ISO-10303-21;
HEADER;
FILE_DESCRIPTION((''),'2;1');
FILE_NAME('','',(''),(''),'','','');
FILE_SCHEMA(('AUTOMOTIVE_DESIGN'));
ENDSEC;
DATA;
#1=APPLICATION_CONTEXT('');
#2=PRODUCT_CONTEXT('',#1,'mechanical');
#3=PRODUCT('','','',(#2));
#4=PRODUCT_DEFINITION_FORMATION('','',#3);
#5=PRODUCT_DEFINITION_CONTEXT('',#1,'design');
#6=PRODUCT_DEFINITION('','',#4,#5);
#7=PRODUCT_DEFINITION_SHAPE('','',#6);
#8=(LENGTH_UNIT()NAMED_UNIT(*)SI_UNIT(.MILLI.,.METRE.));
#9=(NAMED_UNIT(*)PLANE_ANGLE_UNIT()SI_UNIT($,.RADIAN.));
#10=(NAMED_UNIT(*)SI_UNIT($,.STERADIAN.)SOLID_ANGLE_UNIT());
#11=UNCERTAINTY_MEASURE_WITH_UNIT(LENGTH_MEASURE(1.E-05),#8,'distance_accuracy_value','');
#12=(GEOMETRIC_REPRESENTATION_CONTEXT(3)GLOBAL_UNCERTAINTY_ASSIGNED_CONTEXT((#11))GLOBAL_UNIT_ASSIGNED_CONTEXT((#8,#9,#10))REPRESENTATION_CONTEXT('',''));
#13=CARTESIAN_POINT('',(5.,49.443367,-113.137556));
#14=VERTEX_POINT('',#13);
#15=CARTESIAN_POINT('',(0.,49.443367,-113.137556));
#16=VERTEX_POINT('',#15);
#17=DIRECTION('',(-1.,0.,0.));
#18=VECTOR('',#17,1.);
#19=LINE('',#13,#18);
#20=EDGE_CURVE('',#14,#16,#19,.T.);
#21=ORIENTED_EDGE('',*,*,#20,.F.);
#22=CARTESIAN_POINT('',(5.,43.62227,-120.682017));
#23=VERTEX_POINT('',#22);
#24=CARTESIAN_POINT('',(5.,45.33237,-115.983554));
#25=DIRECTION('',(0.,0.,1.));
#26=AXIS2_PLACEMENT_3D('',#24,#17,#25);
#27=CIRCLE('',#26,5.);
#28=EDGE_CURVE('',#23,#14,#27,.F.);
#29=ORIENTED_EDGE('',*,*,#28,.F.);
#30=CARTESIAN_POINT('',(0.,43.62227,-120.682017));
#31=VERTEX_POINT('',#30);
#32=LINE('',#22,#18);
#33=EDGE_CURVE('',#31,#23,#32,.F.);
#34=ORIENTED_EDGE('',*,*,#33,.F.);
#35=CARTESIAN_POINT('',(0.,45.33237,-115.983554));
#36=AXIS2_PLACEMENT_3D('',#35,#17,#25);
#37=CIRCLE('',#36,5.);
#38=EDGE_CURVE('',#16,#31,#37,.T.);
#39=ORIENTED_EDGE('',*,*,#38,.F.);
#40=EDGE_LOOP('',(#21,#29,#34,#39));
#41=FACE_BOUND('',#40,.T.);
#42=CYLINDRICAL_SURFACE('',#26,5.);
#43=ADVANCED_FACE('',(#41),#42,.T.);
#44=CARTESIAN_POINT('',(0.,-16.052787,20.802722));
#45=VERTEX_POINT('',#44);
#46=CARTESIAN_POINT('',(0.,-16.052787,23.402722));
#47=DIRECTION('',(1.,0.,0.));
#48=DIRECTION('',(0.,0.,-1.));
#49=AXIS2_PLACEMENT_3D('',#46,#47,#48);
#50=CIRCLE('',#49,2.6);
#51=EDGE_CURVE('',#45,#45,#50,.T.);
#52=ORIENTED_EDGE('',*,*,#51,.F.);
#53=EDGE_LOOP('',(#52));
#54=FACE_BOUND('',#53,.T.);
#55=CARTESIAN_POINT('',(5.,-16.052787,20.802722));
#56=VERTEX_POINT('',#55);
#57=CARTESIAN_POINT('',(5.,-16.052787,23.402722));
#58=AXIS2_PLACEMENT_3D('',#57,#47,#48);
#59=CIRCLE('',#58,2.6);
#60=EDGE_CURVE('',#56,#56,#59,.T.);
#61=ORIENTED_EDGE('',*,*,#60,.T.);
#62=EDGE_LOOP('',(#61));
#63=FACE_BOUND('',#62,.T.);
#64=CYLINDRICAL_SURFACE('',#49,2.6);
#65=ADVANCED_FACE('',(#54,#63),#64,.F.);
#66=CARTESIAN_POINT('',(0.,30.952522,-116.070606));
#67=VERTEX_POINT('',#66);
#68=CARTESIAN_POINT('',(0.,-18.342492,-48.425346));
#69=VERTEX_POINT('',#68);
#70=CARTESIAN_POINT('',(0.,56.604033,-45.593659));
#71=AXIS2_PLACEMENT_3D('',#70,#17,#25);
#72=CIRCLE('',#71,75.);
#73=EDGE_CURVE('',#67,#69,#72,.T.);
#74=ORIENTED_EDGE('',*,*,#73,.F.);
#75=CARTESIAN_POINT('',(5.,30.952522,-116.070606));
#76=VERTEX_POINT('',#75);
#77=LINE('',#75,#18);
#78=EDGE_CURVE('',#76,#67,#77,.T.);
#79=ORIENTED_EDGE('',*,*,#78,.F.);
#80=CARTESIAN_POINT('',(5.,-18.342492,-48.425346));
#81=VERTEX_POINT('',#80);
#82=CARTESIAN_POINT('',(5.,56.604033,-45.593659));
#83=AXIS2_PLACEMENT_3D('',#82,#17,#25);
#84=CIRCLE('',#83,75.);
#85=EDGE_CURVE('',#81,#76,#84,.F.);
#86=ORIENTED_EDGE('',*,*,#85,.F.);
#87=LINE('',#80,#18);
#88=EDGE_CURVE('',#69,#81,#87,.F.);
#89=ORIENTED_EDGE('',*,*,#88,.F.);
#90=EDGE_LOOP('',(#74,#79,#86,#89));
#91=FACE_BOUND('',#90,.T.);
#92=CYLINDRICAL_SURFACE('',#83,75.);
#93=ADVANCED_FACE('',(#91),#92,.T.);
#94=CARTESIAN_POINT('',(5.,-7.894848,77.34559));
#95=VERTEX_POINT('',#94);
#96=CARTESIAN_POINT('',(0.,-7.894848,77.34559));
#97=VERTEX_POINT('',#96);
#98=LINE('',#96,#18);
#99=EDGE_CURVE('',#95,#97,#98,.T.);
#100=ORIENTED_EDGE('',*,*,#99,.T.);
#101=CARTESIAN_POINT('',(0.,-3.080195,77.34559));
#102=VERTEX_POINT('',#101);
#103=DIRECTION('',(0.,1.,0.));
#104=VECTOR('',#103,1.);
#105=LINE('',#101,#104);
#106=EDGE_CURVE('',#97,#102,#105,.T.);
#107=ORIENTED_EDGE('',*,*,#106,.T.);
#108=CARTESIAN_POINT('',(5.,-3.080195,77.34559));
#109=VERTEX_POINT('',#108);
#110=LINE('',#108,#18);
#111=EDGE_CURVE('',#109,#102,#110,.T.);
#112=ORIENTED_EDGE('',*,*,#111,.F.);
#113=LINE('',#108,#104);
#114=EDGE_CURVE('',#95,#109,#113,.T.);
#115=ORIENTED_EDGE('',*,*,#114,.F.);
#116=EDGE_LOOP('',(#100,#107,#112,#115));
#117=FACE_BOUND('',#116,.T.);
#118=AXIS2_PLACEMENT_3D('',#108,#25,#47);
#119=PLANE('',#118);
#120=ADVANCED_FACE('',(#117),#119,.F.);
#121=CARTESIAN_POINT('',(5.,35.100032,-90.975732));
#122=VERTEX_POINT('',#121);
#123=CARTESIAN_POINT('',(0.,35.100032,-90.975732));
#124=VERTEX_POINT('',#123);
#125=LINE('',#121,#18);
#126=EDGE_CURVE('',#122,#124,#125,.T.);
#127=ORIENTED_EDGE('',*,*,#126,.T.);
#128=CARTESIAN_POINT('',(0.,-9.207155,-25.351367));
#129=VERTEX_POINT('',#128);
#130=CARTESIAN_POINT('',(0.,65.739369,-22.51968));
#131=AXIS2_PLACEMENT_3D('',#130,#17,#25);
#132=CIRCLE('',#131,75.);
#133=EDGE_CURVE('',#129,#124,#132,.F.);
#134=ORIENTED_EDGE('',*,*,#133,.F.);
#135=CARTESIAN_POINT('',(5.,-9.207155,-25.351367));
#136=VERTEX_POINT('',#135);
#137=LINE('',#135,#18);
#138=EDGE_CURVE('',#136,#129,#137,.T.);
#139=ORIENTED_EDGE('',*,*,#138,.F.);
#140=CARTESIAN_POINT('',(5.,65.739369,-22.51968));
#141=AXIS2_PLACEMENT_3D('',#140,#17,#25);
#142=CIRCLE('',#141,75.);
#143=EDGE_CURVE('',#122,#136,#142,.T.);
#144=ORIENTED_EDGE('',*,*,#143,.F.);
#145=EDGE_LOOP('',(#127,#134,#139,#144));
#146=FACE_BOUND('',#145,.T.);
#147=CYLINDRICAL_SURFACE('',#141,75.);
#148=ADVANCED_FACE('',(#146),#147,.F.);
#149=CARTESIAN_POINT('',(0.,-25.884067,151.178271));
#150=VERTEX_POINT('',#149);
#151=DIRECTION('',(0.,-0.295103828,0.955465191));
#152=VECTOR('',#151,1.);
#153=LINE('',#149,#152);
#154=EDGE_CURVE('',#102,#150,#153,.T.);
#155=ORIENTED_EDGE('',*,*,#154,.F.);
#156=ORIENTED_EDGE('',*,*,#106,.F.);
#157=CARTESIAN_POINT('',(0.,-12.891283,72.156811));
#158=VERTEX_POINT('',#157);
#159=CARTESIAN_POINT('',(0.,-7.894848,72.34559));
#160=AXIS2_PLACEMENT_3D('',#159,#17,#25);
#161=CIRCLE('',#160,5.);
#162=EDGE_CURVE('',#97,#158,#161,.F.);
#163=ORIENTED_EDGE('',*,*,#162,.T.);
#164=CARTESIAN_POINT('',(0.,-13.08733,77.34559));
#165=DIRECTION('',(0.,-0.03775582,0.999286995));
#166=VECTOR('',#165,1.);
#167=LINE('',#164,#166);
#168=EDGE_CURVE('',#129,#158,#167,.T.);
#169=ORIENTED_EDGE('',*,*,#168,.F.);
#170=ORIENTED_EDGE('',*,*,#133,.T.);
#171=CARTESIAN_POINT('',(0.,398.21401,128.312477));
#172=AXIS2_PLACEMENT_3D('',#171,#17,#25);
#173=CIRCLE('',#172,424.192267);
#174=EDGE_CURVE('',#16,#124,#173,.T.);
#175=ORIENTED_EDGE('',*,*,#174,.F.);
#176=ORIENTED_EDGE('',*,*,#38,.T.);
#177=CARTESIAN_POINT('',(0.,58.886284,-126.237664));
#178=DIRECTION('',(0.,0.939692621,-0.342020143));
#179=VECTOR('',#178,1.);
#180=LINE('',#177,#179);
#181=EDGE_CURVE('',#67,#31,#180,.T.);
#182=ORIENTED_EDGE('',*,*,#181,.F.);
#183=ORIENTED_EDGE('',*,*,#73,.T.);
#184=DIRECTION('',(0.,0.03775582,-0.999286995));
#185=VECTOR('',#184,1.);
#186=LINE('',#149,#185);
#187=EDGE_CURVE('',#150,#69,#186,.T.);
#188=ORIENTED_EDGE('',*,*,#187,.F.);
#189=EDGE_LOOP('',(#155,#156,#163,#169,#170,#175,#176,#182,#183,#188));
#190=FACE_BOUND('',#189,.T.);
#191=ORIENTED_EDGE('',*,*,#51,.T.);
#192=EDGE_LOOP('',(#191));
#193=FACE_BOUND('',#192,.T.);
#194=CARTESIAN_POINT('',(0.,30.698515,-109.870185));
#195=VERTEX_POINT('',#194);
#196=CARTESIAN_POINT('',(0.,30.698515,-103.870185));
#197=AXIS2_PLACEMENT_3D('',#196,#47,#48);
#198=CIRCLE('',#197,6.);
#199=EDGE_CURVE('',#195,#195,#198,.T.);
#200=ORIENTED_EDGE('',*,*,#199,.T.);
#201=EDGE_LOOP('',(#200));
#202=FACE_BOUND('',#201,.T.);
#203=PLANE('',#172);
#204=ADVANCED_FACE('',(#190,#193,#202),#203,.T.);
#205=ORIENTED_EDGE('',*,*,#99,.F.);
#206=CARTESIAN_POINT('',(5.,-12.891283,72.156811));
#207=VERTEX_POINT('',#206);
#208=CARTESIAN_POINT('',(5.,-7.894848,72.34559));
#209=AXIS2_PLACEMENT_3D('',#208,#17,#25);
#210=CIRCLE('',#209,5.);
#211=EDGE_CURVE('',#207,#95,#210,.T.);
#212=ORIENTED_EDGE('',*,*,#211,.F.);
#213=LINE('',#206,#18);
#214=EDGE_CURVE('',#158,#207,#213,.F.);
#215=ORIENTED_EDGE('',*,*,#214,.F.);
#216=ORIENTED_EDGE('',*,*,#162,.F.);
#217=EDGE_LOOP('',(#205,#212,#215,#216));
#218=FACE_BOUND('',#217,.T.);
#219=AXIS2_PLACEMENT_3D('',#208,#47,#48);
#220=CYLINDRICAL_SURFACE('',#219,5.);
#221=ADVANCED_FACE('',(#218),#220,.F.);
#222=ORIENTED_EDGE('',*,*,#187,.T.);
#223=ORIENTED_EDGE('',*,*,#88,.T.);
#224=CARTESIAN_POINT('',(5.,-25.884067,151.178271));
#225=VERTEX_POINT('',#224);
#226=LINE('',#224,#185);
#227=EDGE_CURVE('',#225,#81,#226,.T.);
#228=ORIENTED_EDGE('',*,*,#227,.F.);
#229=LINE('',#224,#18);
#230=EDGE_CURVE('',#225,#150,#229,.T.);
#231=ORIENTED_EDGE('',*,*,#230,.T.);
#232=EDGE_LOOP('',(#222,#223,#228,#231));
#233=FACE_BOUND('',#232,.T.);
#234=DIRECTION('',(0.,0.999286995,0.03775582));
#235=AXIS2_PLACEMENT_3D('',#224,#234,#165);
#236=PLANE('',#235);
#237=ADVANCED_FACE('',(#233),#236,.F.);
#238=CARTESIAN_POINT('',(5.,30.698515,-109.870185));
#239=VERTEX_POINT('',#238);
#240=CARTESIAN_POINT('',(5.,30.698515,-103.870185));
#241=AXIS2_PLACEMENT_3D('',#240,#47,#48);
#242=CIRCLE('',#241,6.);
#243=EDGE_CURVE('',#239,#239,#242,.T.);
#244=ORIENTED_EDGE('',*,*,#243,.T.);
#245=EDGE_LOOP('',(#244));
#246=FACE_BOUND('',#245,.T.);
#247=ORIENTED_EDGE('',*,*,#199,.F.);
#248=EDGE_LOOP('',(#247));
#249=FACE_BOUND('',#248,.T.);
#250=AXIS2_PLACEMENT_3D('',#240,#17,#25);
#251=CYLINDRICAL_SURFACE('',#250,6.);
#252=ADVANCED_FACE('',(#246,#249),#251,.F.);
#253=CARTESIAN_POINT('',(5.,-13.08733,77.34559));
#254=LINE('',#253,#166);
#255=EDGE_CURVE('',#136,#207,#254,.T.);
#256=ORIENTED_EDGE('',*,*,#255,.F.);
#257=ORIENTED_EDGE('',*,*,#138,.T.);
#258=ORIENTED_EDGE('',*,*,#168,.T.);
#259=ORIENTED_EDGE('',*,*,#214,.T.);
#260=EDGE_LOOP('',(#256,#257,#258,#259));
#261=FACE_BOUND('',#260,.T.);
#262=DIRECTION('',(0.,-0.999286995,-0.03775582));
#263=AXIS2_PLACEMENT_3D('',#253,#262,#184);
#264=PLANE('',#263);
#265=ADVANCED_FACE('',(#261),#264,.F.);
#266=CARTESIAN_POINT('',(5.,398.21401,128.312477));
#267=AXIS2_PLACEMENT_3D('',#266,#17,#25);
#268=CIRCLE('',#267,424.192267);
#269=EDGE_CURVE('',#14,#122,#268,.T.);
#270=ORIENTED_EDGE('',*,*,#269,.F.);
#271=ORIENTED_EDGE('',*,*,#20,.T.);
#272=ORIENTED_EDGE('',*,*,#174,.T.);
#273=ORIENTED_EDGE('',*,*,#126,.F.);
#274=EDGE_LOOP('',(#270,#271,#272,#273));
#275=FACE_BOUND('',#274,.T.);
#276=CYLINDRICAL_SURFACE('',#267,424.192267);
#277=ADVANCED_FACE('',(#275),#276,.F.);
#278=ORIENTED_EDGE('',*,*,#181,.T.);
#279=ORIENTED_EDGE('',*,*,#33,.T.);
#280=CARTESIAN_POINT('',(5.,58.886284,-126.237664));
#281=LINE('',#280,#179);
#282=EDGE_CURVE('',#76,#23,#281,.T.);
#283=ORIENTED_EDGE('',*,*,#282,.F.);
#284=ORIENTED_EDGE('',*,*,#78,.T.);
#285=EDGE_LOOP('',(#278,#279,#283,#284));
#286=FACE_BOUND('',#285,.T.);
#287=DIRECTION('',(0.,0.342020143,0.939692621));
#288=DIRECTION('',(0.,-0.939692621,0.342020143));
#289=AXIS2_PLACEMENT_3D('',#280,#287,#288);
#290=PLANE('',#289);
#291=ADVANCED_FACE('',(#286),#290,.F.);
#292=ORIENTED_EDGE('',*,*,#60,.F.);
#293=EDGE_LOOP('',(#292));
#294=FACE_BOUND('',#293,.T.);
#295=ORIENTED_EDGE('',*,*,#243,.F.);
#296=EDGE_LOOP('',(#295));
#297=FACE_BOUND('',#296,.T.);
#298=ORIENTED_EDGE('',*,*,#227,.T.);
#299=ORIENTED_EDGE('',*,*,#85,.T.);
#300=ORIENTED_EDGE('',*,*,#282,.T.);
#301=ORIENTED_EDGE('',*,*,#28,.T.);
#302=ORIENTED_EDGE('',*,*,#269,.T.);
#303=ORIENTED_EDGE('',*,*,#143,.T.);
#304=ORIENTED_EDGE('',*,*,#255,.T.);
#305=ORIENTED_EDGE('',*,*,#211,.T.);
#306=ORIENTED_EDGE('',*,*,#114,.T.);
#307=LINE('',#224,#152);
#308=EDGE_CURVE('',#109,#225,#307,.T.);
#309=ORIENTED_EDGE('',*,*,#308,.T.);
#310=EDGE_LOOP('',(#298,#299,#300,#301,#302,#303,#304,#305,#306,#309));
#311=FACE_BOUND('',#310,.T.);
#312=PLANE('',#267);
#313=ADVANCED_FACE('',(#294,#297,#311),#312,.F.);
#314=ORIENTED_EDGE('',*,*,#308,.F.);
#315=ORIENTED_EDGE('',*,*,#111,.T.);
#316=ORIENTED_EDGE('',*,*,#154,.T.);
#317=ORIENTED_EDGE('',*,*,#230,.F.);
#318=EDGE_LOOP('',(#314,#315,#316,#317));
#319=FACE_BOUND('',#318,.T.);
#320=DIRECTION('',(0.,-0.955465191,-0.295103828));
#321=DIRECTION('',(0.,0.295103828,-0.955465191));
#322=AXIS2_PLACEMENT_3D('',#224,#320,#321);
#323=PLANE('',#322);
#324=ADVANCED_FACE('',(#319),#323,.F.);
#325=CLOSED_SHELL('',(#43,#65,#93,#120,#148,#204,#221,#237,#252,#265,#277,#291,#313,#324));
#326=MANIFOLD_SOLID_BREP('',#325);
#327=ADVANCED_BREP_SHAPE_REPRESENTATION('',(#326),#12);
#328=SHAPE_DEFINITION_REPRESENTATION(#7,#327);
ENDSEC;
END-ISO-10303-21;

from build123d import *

# Parameters (mm, degrees)
SKETCH_1_R          = 6
EXTRUDE_1_DEPTH     = 5
FILLET_1_R          = 5
FILLET_2_R          = 75
FILLET_3_R          = 5
SKETCH_3_R          = 2.6
CUT_EXTRUDE_1_DEPTH = 160.415234704


with BuildPart() as part:
    # Эскиз1 → Бобышка-Вытянуть1 (new body)
    with BuildSketch(Plane(origin=(0, 0, 0), x_dir=(0, 0, -1), z_dir=(1, 0, 0))):
        with BuildLine():
            Line((126.237664014, 58.886284382), (98.821729218, -16.438377404))
            Line((98.821729218, -16.438377404), (-151.178270782, -25.884067346))
            Line((-151.178270782, -25.884067346), (-77.345590471, -3.080194644))
            Line((-77.345590471, -3.080194644), (-77.345590471, -13.087329783))
            Line((-77.345590471, -13.087329783), (75.539410437, -7.310912522))
            Line((75.539410437, -7.310912522), (90.975731778, 35.100031802))
            ThreePointArc((90.975731778, 35.100031802), (108.905022115, 46.550907327), (126.237664014, 58.886284382))
        make_face()
        with Locations((103.870185422, 30.698515365)):
            Circle(SKETCH_1_R, mode=Mode.SUBTRACT)
    extrude(amount=EXTRUDE_1_DEPTH)

    # Скругление1
    fillet_1_edges = [part.edges().sort_by_distance(p)[0] for p in [
        (2.5, -13.087329783, 77.345590471),
    ]]
    fillet(fillet_1_edges, radius=FILLET_1_R)

    # Скругление2
    # the kernel refuses this fillet: 75 mm, written as the material it adds along each edge
    with BuildSketch(Plane(origin=(0, -7.310912522, -75.539410437), x_dir=(0, -0.037755820465347284, 0.9992869948223027), z_dir=(1, 0, 0))) as fillet_2_piece_1:
        with BuildLine():
            CenterArc((50.223853574, -75), FILLET_2_R, 90, 63.724056715)
            Line((-17.026575163, -41.797894123), (0, 0))
            Line((0, 0), (50.223853574, 0))
        make_face()
    extrude(amount=5)
    # the kernel refuses this fillet: 75 mm, written as the material it takes off along each edge
    with BuildSketch(Plane(origin=(-126.080854452, -16.438377404, -98.821729218), x_dir=(0, -0.03775582046534733, 0.9992869948223025), z_dir=(1, 0, 0))) as fillet_2_2_piece_1:
        with BuildLine():
            CenterArc((FILLET_2_R * 0.672431223743, -FILLET_2_R), FILLET_2_R, 90, 67.836236553)
            Line((-FILLET_2_R * 0.253678140212, -FILLET_2_R * 0.622744852924), (0, 0))
            Line((0, 0), (FILLET_2_R * 0.672431223743, 0))
        make_face()
    extrude(amount=257.161708904, mode=Mode.SUBTRACT)

    # Скругление3
    fillet_3_edges = [part.edges().sort_by_distance(p)[0] for p in [
        (2.5, 58.886284382, -126.237664014),
    ]]
    fillet(fillet_3_edges, radius=FILLET_3_R)

    # Эскиз3 → Вырез-Вытянуть1 (cut, through all)
    with BuildSketch(Plane(origin=(5, 0, 0), x_dir=(0, 0, -1), z_dir=(1, 0, 0))):
        with Locations((-23.402722319, -16.052786924)):
            Circle(SKETCH_3_R)
    extrude(amount=-CUT_EXTRUDE_1_DEPTH, mode=Mode.SUBTRACT)


solid = part.part
